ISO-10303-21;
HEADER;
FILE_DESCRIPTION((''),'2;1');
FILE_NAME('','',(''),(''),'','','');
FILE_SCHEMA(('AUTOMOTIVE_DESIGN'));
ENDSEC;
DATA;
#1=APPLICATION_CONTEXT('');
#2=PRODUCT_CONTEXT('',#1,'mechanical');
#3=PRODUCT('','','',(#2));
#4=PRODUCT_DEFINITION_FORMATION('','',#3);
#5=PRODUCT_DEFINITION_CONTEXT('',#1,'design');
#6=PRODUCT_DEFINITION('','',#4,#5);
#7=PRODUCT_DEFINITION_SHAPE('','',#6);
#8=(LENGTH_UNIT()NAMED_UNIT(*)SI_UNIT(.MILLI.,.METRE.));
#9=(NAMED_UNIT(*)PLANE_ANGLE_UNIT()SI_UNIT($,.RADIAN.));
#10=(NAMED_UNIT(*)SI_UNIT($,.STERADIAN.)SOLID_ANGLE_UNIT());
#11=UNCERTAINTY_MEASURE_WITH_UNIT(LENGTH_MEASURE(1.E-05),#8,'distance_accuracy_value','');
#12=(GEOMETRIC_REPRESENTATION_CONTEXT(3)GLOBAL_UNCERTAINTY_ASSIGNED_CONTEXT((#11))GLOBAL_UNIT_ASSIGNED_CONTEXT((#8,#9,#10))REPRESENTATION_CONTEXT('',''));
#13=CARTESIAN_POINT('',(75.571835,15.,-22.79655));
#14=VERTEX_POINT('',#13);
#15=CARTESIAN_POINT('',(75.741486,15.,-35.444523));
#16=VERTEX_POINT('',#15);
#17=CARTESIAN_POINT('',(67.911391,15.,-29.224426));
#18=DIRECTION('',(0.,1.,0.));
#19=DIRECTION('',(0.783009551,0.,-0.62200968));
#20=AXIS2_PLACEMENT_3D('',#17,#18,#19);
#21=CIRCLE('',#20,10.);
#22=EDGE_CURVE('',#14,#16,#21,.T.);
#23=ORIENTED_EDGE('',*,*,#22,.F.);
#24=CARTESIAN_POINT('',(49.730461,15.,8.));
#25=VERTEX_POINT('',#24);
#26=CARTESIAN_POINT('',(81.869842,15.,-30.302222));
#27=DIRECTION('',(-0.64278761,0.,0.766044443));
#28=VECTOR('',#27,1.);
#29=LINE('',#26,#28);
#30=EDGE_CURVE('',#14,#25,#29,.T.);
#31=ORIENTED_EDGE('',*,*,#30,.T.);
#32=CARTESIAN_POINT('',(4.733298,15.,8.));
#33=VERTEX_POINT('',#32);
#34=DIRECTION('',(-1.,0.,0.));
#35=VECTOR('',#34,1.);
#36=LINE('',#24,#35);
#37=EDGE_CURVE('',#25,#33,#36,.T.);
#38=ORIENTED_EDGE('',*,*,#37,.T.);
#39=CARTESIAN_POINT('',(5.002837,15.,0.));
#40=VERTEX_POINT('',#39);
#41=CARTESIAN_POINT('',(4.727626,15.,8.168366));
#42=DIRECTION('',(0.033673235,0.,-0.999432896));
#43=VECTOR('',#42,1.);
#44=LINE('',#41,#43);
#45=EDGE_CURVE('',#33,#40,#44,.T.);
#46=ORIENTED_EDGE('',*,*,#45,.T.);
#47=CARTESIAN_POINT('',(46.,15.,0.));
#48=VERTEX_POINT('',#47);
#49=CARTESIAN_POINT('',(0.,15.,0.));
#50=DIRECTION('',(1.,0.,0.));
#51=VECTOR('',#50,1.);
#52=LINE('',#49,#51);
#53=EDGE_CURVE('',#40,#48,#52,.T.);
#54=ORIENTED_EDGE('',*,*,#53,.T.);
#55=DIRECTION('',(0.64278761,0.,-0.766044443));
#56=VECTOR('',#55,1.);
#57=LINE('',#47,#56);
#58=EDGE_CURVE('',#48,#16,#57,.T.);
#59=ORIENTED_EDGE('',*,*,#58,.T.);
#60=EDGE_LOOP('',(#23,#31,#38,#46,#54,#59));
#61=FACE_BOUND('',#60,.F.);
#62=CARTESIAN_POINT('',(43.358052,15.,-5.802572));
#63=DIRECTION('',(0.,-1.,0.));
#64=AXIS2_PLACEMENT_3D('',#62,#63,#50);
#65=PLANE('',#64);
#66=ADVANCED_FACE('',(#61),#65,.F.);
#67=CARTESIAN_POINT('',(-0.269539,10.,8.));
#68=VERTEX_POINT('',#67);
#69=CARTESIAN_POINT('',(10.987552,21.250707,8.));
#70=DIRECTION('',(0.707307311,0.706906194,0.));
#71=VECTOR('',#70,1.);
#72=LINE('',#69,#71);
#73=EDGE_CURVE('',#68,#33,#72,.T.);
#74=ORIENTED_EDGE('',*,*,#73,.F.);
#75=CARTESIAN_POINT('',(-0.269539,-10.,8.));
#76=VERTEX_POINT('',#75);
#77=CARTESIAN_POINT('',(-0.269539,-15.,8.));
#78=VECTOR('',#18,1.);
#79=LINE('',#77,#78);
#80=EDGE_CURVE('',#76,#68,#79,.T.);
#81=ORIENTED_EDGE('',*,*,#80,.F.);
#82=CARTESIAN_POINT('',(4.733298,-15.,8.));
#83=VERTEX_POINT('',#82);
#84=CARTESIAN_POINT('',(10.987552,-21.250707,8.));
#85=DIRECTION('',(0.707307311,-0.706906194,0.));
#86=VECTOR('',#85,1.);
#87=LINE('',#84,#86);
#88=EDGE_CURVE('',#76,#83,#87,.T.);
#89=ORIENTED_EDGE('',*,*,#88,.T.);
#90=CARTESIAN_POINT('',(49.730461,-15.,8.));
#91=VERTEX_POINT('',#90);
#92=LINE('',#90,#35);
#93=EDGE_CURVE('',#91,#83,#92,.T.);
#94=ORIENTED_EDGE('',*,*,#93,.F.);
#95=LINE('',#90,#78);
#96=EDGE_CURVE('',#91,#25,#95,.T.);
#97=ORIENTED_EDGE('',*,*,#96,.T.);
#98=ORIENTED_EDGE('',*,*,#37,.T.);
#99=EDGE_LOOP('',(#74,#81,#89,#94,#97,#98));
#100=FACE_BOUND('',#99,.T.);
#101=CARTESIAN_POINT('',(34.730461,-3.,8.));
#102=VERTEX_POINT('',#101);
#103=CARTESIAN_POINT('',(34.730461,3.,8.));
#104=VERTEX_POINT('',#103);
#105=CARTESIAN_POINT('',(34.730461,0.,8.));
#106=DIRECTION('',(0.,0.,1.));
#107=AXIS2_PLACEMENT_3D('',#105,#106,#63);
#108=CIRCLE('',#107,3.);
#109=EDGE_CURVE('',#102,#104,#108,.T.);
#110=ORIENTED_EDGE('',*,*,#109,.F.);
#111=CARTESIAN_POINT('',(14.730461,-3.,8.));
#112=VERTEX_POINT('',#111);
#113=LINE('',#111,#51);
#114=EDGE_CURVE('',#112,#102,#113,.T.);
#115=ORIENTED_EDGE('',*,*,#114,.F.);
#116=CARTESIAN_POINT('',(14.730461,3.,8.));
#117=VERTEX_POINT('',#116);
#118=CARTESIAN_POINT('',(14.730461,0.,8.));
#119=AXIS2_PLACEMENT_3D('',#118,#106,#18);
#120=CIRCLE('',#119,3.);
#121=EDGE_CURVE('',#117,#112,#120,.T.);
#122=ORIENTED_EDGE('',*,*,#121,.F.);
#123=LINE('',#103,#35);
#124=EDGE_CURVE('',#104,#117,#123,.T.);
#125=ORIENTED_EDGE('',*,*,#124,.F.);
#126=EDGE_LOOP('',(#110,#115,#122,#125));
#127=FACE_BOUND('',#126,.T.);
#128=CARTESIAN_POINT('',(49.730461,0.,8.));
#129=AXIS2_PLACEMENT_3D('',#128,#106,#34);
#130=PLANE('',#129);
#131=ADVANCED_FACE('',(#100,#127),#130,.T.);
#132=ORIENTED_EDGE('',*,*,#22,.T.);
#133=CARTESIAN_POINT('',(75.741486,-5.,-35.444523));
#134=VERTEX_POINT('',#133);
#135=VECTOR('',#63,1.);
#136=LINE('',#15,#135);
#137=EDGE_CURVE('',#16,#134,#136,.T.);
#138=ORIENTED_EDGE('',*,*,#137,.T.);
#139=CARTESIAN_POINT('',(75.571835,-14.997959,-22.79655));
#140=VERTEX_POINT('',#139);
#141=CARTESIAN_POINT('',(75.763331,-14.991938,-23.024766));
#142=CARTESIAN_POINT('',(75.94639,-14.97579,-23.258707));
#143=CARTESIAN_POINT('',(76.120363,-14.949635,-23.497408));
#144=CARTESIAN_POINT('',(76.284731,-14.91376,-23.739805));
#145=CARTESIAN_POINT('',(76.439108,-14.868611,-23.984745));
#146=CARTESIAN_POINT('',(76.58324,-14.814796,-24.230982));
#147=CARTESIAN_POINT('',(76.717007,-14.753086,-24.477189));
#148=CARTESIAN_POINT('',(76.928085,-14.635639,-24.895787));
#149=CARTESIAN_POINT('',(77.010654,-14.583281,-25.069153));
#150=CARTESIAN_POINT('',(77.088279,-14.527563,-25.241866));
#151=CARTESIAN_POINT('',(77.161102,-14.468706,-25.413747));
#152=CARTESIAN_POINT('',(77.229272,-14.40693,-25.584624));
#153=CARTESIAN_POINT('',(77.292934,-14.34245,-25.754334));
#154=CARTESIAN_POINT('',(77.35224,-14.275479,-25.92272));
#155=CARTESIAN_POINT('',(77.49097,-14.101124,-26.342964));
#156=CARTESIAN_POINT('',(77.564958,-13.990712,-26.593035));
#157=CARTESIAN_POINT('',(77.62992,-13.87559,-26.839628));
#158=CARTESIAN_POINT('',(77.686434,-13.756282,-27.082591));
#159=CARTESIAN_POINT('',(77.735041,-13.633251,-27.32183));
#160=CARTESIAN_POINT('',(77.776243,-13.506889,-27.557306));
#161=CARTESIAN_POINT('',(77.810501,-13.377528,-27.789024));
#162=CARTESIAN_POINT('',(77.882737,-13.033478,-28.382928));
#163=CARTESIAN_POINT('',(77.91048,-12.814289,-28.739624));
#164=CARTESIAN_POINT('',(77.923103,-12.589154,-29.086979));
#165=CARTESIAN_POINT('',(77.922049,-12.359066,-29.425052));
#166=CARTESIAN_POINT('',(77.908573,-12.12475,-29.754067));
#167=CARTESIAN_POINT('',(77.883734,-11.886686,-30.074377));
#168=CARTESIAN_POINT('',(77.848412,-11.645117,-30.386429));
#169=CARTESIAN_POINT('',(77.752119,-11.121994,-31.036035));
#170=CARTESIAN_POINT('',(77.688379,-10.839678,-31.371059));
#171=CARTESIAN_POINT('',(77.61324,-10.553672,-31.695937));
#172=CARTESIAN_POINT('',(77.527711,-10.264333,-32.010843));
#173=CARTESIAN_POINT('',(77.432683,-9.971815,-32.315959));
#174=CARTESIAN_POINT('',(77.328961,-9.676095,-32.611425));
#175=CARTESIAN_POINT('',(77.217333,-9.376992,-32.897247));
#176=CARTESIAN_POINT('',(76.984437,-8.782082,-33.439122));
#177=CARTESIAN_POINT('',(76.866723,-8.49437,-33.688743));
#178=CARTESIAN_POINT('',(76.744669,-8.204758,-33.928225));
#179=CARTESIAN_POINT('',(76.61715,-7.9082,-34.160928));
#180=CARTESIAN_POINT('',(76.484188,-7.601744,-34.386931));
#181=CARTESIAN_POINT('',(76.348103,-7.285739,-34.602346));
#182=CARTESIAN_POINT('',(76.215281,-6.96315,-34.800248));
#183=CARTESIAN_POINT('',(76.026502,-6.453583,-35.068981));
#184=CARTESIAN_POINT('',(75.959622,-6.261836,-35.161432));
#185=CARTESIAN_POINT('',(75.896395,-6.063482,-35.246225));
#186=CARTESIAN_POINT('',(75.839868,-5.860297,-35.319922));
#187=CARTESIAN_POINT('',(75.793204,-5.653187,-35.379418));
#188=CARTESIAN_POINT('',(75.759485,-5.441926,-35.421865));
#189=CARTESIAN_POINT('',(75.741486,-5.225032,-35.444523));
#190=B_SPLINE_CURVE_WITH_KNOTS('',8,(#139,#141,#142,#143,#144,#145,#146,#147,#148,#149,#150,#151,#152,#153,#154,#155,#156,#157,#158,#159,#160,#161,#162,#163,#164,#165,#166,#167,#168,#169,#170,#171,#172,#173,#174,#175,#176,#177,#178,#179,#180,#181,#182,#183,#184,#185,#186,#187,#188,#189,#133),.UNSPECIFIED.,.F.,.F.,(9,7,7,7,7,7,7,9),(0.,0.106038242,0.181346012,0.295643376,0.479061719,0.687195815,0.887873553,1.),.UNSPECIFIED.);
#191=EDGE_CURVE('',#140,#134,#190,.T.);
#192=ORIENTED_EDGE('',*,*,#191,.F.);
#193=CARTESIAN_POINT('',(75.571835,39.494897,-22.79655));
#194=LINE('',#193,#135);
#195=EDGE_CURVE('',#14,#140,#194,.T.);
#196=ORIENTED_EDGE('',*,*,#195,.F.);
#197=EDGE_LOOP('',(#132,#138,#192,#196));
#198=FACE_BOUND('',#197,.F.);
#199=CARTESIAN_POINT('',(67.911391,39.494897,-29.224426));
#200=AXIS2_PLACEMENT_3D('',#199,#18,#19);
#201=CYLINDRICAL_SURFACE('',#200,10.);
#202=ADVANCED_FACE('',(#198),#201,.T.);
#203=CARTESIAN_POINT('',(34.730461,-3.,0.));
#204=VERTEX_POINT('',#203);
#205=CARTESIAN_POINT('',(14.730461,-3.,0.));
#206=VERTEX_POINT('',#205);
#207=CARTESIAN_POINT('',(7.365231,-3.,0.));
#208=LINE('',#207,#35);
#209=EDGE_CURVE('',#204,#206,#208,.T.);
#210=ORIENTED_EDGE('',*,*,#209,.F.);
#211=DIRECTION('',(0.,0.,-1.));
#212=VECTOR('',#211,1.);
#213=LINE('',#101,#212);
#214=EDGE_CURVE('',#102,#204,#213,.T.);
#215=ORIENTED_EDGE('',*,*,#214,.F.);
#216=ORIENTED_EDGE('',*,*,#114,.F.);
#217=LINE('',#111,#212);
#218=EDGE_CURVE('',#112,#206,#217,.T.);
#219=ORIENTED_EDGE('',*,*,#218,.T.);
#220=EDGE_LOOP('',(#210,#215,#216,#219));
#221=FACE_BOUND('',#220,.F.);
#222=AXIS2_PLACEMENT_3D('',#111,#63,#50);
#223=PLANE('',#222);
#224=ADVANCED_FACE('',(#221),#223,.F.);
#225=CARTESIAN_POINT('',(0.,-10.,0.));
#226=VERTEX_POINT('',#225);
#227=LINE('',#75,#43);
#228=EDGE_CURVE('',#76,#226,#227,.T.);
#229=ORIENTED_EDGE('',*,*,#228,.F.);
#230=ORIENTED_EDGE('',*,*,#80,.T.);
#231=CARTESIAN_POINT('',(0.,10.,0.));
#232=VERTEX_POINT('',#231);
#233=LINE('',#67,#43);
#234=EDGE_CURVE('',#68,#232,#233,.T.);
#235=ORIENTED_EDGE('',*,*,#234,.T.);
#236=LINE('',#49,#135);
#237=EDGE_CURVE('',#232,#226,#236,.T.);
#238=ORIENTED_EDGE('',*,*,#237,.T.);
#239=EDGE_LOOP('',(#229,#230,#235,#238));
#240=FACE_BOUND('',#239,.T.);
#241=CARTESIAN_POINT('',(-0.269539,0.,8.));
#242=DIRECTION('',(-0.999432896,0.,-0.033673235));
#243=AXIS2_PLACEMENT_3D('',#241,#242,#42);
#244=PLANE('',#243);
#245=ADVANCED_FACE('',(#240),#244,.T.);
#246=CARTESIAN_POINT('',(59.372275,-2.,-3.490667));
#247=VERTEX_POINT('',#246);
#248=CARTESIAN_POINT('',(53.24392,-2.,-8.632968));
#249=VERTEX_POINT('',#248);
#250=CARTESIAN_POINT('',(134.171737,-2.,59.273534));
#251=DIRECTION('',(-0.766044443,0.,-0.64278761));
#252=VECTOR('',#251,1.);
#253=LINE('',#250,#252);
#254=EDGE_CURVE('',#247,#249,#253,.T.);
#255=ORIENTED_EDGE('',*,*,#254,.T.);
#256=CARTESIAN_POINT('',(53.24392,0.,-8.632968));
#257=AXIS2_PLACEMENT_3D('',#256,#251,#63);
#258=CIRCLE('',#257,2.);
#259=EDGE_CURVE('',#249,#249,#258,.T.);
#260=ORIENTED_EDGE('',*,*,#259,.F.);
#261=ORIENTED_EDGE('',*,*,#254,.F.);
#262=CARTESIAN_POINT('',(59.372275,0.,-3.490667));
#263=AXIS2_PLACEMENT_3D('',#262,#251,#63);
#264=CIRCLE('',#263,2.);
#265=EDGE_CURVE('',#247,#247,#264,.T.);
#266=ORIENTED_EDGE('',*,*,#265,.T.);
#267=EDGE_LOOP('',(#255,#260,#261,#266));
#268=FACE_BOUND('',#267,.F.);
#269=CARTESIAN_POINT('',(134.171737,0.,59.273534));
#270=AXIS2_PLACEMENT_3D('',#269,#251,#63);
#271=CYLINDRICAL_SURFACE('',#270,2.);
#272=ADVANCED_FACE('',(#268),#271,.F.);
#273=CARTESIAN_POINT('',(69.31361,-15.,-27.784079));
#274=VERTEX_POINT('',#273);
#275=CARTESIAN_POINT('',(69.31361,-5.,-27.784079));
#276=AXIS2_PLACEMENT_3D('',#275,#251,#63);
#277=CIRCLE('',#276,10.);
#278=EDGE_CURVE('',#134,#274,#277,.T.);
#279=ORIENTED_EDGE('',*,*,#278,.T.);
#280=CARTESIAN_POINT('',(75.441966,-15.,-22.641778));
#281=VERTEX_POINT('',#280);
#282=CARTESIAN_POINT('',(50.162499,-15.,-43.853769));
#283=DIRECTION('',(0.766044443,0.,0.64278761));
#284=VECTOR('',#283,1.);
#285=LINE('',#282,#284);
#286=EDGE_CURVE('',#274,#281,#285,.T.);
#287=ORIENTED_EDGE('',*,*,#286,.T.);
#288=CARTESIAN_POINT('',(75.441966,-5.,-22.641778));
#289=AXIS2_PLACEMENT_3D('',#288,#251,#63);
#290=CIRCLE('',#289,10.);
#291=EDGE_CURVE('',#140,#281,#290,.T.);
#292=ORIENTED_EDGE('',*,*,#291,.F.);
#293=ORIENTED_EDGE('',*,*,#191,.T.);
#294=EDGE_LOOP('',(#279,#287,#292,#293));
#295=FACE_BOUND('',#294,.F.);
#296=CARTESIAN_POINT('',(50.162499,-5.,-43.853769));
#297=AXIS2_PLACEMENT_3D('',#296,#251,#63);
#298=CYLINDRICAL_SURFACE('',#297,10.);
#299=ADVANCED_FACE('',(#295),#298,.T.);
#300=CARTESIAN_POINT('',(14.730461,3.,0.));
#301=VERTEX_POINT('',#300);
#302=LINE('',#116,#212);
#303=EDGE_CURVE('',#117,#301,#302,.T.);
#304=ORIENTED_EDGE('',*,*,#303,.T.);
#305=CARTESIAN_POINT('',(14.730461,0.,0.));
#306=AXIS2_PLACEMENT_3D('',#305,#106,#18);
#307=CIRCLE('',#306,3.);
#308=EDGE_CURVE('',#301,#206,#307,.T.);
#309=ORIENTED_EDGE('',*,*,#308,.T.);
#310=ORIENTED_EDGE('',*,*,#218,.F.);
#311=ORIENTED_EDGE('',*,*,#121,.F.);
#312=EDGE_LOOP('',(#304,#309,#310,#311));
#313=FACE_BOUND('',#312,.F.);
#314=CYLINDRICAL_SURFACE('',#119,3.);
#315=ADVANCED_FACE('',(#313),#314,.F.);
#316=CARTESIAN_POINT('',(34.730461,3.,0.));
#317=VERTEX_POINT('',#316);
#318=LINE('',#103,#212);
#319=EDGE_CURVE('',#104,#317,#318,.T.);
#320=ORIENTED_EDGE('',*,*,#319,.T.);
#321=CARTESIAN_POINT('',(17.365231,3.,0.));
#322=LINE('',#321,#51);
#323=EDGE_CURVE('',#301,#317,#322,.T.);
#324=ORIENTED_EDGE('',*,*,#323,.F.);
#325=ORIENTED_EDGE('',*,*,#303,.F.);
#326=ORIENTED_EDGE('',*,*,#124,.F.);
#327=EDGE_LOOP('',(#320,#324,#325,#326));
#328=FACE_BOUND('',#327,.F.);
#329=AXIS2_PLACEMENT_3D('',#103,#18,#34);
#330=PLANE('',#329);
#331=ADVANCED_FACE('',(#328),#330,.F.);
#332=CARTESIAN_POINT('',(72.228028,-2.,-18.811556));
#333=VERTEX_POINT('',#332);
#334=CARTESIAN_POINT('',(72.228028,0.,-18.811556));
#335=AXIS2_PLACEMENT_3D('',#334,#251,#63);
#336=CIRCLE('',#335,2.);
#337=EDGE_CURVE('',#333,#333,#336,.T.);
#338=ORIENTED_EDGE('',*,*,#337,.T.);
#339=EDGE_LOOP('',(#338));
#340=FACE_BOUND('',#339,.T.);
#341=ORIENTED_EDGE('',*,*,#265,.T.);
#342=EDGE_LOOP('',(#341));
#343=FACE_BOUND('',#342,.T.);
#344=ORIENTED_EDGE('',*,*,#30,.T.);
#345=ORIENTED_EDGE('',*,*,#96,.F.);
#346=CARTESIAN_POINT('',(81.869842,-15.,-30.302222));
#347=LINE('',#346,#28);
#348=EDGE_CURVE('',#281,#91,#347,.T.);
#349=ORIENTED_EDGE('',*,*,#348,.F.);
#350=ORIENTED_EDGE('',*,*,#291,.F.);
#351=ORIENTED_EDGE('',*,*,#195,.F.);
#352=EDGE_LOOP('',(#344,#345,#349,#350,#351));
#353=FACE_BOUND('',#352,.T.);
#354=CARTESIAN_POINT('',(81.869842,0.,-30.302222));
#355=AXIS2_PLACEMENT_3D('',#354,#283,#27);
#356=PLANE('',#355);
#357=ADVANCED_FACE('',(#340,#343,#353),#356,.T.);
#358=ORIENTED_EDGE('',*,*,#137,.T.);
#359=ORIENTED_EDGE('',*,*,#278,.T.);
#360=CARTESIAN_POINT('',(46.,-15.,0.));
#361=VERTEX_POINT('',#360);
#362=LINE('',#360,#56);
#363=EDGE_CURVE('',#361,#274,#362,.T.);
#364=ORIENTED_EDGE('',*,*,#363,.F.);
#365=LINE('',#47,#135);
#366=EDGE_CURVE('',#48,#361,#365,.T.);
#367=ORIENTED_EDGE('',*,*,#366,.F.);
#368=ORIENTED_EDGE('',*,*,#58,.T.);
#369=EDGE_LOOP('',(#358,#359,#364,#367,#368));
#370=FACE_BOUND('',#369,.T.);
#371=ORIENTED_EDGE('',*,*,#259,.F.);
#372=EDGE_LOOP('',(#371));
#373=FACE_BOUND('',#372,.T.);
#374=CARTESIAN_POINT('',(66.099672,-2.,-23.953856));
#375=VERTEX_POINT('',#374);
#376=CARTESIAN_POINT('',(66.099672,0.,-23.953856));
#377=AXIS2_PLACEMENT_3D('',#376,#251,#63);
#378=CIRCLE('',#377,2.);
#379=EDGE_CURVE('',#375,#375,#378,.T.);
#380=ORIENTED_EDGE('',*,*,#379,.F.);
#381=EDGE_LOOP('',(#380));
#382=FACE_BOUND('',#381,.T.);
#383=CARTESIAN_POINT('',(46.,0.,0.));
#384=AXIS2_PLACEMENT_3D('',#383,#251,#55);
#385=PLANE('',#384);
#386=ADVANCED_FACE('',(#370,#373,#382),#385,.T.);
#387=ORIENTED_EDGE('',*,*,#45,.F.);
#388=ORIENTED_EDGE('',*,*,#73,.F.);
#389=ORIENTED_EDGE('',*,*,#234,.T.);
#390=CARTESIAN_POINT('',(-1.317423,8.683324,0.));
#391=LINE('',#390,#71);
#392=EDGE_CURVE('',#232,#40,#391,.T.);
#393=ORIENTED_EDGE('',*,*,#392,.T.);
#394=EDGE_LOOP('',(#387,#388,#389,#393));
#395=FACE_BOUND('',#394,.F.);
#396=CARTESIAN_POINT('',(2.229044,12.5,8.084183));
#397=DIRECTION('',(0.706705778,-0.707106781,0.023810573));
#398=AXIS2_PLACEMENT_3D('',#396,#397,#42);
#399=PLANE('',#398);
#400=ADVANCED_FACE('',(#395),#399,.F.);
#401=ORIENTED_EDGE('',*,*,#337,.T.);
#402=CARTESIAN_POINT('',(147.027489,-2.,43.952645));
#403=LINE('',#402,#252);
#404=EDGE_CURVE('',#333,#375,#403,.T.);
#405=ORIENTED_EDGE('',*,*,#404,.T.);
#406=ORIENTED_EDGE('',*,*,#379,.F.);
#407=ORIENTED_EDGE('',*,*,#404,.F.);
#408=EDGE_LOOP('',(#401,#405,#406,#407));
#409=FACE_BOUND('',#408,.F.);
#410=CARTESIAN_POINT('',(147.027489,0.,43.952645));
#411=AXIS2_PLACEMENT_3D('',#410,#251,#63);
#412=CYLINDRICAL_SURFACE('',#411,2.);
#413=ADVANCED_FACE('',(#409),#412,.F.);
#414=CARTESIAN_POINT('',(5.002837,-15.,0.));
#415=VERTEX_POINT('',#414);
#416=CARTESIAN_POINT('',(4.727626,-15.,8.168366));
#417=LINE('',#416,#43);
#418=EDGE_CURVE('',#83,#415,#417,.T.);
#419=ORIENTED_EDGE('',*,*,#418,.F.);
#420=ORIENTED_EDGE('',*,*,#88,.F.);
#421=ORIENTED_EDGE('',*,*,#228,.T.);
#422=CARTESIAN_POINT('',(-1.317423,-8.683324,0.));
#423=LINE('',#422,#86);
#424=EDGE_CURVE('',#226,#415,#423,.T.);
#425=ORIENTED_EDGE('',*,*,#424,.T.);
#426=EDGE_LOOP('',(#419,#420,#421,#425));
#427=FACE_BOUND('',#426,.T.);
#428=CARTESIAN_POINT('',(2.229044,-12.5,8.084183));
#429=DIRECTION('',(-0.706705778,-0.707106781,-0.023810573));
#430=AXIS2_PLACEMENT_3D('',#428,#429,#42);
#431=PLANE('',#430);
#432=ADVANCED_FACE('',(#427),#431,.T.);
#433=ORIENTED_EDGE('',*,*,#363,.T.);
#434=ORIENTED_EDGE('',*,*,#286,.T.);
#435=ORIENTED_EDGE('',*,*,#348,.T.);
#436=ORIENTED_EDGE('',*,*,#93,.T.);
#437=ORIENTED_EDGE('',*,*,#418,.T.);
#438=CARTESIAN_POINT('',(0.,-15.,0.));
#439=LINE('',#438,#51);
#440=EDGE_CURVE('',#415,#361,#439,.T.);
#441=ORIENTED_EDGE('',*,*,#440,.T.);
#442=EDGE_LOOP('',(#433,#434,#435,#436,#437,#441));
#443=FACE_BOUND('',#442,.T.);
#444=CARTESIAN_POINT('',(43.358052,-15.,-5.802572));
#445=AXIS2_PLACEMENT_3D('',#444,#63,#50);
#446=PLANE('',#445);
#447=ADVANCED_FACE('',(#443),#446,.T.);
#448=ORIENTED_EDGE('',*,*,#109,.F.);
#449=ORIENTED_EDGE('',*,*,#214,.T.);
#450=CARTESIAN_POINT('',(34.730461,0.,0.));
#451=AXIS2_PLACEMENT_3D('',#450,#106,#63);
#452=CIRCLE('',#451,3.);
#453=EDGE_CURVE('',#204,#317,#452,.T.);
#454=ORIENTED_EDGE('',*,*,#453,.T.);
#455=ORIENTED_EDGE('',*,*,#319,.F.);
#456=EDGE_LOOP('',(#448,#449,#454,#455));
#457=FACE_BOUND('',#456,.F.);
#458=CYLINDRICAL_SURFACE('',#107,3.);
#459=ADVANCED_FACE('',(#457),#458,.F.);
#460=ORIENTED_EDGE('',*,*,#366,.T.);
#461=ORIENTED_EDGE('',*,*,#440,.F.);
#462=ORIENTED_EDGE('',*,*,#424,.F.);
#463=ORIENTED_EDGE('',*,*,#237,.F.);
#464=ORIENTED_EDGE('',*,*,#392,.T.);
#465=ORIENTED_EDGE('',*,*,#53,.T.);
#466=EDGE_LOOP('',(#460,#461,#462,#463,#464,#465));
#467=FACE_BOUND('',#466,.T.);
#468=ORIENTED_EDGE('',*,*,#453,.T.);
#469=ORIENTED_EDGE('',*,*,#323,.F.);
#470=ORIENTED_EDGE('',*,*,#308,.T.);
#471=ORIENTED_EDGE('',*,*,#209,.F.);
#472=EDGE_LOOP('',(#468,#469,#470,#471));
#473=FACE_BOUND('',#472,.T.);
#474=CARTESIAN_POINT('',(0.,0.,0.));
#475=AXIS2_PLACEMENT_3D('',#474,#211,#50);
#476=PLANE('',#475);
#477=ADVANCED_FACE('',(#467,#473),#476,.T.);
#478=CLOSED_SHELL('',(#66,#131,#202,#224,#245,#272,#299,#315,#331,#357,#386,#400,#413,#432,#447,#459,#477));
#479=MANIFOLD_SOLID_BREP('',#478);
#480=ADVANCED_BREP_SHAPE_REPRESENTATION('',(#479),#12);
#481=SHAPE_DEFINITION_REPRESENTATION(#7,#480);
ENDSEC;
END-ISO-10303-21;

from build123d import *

# Parameters (mm, degrees)
F1_DEPTH    = 15
F3_DEPTH    = 43.4455230334
F5_D        = 4
F6_T1_DEPTH = 78.9897948557
F6_T3_DEPTH = 58
F7_SIZE     = 5


# Not quite as in the source:
# - a fillet or chamfer that OpenCascade refuses, or shapes differently, is made with other operations: its cross-section is extruded or revolved along the edge and cut away or added


with BuildPart() as f1:
    # F0 (on Front) → F1 (new body, symmetric)
    with BuildSketch(Plane.XZ):
        Polygon((-0.2695387348, 8), (0, 0), (46, 0), (75.7414862046, -35.4445230334), (81.8698417496, -30.3022221559), (49.7304612652, 8), align=None)
    extrude(amount=F1_DEPTH, both=True)

    # F2 (on face) → F3 (cut, through all)
    with BuildSketch(Plane.XY.offset(8)):
        with BuildLine():
            ThreePointArc((14.7304612652, 3), (11.7304612652, 0), (14.7304612652, -3))
            Line((14.7304612652, -3), (34.7304612652, -3))
            ThreePointArc((34.7304612652, -3), (37.7304612652, 0), (34.7304612652, 3))
            Line((34.7304612652, 3), (14.7304612652, 3))
        make_face()
    extrude(amount=-F3_DEPTH, mode=Mode.SUBTRACT)

    # F5 (through all)
    with Locations(Plane(origin=(33.1222636313, 0, 27.7928791968), x_dir=(0, 1, 0), z_dir=(0.7660444431, 0, 0.6427876097))):
        with Locations((0, -40.8377687803), (0, -60.8377687803)):
            Hole(F5_D / 2)

    # F6: fillet of radius 10 on 2 edges, made by hand

    # F6_s2 → F6_t1 (cut)
    with BuildSketch(Plane.XZ.offset(-39.4948974278)):
        with BuildLine():
            ThreePointArc((75.7414862046, -35.4445230334), (77.9104912295, -29.0903052725), (75.5718351227, -22.7965501322))
            Line((75.5718351227, -22.7965501322), (81.8698417496, -30.3022221559))
            Line((81.8698417496, -30.3022221559), (75.7414862046, -35.4445230334))
        make_face()
    extrude(amount=F6_T1_DEPTH, mode=Mode.SUBTRACT)

    # F6_s4 → F6_t3 (cut)
    with BuildSketch(Plane(origin=(7.8427970084, 0, 6.5808880771), x_dir=(0, 1, 0), z_dir=(0.7660444431, 0, 0.6427876097))):
        with BuildLine():
            ThreePointArc((-15, -65.8377687803), (-12.0710678119, -72.9088365922), (-5, -75.8377687803))
            Line((-5, -75.8377687803), (-15, -75.8377687803))
            Line((-15, -75.8377687803), (-15, -65.8377687803))
        make_face()
    extrude(amount=F6_T3_DEPTH, mode=Mode.SUBTRACT)

    # F7
    f7_edges = [f1.edges().sort_by_distance(p)[0] for p in [
        (-0.134769, -15, 4),
        (-0.134769, 15, 4),
    ]]
    chamfer(f7_edges, length=F7_SIZE)


solid = f1.part
